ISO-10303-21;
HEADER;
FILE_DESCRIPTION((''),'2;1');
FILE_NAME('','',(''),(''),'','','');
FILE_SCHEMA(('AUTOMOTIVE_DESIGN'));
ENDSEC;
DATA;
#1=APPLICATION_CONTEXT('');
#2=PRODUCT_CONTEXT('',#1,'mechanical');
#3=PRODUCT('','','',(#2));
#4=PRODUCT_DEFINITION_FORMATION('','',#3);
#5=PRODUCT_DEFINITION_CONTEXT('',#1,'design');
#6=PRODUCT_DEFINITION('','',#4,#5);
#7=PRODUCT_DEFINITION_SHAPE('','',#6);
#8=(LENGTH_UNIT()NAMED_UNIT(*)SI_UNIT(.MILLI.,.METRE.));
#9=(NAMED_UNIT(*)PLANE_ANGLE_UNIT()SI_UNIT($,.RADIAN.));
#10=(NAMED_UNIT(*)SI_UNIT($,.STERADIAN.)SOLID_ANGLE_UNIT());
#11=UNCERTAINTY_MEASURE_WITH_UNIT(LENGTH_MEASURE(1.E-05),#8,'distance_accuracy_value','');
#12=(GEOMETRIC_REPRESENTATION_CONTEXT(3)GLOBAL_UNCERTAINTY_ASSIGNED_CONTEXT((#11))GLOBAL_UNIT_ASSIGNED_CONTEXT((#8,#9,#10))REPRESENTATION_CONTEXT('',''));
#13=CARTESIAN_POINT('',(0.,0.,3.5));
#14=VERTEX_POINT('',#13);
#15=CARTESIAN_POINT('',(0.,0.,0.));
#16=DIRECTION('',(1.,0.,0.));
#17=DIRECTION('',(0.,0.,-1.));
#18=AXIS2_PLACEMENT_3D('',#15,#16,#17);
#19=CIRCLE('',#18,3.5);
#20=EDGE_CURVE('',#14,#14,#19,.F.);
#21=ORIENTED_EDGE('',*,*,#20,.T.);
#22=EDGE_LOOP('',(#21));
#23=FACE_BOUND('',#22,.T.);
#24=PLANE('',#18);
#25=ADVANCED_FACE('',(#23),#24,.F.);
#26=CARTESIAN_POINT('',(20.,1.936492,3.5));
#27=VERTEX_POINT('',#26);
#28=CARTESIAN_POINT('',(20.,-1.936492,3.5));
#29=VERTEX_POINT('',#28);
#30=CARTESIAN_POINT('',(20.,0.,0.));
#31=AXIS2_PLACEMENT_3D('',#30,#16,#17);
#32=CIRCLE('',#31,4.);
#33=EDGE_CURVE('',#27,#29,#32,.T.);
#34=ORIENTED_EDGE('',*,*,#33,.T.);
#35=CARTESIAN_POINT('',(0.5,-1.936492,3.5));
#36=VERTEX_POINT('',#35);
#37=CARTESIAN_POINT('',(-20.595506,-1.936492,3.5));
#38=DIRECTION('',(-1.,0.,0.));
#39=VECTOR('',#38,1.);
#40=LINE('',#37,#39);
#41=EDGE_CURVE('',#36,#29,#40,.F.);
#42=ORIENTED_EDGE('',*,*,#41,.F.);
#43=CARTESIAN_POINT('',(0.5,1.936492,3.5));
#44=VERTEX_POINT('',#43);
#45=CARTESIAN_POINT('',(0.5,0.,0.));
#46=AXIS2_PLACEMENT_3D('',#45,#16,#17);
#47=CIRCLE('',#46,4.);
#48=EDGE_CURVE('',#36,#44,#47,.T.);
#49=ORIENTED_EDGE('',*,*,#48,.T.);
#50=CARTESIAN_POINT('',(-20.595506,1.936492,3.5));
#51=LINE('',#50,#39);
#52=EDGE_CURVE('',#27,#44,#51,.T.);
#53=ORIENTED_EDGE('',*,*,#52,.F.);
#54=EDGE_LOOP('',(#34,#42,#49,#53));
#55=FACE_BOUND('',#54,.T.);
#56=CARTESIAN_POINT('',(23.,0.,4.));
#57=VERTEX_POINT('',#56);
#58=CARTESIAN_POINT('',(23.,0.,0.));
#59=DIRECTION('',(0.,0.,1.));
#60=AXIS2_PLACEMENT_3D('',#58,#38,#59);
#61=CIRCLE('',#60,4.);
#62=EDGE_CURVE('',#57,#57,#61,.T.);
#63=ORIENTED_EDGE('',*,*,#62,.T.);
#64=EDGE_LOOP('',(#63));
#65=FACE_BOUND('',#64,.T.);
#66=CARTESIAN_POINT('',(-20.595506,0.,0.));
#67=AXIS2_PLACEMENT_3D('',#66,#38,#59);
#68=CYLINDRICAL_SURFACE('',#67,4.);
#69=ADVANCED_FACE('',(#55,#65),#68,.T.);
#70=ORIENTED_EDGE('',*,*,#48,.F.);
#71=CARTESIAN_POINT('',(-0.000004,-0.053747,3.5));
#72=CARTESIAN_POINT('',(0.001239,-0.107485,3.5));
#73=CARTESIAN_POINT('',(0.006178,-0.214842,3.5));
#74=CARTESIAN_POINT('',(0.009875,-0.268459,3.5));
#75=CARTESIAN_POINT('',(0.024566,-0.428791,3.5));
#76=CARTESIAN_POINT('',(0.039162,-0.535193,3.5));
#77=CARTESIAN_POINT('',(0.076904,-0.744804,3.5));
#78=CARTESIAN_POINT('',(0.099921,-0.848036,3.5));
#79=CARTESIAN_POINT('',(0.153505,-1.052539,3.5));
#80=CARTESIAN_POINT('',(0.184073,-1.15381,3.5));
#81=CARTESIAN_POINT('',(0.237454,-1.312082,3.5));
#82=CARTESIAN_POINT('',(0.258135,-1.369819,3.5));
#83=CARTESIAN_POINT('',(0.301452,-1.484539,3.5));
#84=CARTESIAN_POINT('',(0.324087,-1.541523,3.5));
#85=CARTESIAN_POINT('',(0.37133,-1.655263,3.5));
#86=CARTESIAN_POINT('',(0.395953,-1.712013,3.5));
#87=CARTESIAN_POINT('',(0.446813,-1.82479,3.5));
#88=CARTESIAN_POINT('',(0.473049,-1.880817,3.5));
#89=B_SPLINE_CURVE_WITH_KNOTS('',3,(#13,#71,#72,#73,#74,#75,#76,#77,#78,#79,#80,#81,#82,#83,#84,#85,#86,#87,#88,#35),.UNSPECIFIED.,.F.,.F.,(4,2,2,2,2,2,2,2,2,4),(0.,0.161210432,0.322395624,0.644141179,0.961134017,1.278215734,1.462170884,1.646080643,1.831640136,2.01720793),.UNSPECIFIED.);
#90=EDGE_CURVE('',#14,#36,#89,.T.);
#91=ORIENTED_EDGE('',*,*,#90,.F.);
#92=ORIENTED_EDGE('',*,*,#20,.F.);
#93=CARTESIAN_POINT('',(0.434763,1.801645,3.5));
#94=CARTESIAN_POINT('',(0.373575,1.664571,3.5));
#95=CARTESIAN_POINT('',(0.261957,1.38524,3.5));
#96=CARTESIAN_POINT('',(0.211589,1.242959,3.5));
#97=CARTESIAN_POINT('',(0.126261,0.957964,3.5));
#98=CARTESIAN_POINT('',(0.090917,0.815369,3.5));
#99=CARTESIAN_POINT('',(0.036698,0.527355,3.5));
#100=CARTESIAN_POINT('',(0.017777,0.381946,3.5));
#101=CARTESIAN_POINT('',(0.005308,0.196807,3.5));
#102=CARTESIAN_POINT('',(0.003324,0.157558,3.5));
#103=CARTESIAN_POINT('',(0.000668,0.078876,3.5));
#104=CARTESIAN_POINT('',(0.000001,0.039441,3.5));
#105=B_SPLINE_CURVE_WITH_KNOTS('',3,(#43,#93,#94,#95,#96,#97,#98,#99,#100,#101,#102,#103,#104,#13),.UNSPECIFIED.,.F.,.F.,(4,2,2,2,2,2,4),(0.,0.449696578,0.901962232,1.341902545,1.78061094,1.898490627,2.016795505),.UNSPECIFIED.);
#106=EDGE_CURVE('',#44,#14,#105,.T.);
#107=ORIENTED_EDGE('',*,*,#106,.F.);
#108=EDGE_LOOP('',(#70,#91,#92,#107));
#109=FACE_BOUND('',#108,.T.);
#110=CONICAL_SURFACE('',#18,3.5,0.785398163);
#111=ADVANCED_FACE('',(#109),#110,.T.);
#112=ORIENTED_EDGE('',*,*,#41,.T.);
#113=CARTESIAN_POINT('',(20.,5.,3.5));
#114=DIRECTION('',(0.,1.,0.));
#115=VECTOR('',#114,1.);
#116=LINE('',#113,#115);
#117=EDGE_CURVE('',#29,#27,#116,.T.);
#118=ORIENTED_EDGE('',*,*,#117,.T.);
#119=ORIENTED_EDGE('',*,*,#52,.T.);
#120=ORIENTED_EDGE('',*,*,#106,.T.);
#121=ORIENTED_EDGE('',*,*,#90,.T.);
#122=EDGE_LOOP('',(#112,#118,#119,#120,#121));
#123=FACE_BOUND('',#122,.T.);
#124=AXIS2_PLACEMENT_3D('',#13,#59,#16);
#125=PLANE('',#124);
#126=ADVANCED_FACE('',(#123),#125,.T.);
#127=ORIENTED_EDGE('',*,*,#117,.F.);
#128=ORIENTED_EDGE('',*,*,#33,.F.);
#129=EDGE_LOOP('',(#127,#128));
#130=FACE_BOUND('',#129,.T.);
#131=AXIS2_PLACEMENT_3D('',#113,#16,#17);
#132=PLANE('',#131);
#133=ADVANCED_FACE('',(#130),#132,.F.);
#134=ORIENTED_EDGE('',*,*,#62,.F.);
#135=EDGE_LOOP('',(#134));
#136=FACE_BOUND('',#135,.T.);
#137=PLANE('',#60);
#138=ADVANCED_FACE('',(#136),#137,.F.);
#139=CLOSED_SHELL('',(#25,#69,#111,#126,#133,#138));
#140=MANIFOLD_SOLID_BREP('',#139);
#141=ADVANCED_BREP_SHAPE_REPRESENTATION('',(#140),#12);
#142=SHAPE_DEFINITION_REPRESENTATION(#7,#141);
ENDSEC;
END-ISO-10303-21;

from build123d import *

# Parameters (mm, degrees)
ESQUISSE1_W             = 23
ESQUISSE1_H             = 4
ESQUISSE2_W             = 20
ESQUISSE2_H             = 10
ENL_V_MAT_EXTRU_1_DEPTH = 0.5
CHANFREIN1_SIZE         = 0.5


with BuildPart() as part:
    # Esquisse1 → Révolution1 (revolve)
    with BuildSketch(Plane.XY, mode=Mode.PRIVATE) as r_volution1_sk:
        with Locations((11.5, 2)):
            Rectangle(ESQUISSE1_W, ESQUISSE1_H)
    revolve(r_volution1_sk.sketch.rotate(Axis((-20.595505618, 0, 0), (1, 0, 0)), 90), axis=Axis((-20.595505618, 0, 0), (1, 0, 0)))

    # Esquisse2 → Enlèv. mat.-Extru.1 (cut)
    with BuildSketch(Plane.XY.offset(4)):
        with Locations((10, 0)):
            Rectangle(ESQUISSE2_W, ESQUISSE2_H)
    extrude(amount=-ENL_V_MAT_EXTRU_1_DEPTH, mode=Mode.SUBTRACT)

    # Chanfrein1
    chanfrein1_edges = [part.edges().sort_by_distance(p)[0] for p in [
        (0, 0, -4),
    ]]
    chamfer(chanfrein1_edges, length=CHANFREIN1_SIZE - 0.0001)  # a hair under: the kernel refuses the full size


solid = part.part
